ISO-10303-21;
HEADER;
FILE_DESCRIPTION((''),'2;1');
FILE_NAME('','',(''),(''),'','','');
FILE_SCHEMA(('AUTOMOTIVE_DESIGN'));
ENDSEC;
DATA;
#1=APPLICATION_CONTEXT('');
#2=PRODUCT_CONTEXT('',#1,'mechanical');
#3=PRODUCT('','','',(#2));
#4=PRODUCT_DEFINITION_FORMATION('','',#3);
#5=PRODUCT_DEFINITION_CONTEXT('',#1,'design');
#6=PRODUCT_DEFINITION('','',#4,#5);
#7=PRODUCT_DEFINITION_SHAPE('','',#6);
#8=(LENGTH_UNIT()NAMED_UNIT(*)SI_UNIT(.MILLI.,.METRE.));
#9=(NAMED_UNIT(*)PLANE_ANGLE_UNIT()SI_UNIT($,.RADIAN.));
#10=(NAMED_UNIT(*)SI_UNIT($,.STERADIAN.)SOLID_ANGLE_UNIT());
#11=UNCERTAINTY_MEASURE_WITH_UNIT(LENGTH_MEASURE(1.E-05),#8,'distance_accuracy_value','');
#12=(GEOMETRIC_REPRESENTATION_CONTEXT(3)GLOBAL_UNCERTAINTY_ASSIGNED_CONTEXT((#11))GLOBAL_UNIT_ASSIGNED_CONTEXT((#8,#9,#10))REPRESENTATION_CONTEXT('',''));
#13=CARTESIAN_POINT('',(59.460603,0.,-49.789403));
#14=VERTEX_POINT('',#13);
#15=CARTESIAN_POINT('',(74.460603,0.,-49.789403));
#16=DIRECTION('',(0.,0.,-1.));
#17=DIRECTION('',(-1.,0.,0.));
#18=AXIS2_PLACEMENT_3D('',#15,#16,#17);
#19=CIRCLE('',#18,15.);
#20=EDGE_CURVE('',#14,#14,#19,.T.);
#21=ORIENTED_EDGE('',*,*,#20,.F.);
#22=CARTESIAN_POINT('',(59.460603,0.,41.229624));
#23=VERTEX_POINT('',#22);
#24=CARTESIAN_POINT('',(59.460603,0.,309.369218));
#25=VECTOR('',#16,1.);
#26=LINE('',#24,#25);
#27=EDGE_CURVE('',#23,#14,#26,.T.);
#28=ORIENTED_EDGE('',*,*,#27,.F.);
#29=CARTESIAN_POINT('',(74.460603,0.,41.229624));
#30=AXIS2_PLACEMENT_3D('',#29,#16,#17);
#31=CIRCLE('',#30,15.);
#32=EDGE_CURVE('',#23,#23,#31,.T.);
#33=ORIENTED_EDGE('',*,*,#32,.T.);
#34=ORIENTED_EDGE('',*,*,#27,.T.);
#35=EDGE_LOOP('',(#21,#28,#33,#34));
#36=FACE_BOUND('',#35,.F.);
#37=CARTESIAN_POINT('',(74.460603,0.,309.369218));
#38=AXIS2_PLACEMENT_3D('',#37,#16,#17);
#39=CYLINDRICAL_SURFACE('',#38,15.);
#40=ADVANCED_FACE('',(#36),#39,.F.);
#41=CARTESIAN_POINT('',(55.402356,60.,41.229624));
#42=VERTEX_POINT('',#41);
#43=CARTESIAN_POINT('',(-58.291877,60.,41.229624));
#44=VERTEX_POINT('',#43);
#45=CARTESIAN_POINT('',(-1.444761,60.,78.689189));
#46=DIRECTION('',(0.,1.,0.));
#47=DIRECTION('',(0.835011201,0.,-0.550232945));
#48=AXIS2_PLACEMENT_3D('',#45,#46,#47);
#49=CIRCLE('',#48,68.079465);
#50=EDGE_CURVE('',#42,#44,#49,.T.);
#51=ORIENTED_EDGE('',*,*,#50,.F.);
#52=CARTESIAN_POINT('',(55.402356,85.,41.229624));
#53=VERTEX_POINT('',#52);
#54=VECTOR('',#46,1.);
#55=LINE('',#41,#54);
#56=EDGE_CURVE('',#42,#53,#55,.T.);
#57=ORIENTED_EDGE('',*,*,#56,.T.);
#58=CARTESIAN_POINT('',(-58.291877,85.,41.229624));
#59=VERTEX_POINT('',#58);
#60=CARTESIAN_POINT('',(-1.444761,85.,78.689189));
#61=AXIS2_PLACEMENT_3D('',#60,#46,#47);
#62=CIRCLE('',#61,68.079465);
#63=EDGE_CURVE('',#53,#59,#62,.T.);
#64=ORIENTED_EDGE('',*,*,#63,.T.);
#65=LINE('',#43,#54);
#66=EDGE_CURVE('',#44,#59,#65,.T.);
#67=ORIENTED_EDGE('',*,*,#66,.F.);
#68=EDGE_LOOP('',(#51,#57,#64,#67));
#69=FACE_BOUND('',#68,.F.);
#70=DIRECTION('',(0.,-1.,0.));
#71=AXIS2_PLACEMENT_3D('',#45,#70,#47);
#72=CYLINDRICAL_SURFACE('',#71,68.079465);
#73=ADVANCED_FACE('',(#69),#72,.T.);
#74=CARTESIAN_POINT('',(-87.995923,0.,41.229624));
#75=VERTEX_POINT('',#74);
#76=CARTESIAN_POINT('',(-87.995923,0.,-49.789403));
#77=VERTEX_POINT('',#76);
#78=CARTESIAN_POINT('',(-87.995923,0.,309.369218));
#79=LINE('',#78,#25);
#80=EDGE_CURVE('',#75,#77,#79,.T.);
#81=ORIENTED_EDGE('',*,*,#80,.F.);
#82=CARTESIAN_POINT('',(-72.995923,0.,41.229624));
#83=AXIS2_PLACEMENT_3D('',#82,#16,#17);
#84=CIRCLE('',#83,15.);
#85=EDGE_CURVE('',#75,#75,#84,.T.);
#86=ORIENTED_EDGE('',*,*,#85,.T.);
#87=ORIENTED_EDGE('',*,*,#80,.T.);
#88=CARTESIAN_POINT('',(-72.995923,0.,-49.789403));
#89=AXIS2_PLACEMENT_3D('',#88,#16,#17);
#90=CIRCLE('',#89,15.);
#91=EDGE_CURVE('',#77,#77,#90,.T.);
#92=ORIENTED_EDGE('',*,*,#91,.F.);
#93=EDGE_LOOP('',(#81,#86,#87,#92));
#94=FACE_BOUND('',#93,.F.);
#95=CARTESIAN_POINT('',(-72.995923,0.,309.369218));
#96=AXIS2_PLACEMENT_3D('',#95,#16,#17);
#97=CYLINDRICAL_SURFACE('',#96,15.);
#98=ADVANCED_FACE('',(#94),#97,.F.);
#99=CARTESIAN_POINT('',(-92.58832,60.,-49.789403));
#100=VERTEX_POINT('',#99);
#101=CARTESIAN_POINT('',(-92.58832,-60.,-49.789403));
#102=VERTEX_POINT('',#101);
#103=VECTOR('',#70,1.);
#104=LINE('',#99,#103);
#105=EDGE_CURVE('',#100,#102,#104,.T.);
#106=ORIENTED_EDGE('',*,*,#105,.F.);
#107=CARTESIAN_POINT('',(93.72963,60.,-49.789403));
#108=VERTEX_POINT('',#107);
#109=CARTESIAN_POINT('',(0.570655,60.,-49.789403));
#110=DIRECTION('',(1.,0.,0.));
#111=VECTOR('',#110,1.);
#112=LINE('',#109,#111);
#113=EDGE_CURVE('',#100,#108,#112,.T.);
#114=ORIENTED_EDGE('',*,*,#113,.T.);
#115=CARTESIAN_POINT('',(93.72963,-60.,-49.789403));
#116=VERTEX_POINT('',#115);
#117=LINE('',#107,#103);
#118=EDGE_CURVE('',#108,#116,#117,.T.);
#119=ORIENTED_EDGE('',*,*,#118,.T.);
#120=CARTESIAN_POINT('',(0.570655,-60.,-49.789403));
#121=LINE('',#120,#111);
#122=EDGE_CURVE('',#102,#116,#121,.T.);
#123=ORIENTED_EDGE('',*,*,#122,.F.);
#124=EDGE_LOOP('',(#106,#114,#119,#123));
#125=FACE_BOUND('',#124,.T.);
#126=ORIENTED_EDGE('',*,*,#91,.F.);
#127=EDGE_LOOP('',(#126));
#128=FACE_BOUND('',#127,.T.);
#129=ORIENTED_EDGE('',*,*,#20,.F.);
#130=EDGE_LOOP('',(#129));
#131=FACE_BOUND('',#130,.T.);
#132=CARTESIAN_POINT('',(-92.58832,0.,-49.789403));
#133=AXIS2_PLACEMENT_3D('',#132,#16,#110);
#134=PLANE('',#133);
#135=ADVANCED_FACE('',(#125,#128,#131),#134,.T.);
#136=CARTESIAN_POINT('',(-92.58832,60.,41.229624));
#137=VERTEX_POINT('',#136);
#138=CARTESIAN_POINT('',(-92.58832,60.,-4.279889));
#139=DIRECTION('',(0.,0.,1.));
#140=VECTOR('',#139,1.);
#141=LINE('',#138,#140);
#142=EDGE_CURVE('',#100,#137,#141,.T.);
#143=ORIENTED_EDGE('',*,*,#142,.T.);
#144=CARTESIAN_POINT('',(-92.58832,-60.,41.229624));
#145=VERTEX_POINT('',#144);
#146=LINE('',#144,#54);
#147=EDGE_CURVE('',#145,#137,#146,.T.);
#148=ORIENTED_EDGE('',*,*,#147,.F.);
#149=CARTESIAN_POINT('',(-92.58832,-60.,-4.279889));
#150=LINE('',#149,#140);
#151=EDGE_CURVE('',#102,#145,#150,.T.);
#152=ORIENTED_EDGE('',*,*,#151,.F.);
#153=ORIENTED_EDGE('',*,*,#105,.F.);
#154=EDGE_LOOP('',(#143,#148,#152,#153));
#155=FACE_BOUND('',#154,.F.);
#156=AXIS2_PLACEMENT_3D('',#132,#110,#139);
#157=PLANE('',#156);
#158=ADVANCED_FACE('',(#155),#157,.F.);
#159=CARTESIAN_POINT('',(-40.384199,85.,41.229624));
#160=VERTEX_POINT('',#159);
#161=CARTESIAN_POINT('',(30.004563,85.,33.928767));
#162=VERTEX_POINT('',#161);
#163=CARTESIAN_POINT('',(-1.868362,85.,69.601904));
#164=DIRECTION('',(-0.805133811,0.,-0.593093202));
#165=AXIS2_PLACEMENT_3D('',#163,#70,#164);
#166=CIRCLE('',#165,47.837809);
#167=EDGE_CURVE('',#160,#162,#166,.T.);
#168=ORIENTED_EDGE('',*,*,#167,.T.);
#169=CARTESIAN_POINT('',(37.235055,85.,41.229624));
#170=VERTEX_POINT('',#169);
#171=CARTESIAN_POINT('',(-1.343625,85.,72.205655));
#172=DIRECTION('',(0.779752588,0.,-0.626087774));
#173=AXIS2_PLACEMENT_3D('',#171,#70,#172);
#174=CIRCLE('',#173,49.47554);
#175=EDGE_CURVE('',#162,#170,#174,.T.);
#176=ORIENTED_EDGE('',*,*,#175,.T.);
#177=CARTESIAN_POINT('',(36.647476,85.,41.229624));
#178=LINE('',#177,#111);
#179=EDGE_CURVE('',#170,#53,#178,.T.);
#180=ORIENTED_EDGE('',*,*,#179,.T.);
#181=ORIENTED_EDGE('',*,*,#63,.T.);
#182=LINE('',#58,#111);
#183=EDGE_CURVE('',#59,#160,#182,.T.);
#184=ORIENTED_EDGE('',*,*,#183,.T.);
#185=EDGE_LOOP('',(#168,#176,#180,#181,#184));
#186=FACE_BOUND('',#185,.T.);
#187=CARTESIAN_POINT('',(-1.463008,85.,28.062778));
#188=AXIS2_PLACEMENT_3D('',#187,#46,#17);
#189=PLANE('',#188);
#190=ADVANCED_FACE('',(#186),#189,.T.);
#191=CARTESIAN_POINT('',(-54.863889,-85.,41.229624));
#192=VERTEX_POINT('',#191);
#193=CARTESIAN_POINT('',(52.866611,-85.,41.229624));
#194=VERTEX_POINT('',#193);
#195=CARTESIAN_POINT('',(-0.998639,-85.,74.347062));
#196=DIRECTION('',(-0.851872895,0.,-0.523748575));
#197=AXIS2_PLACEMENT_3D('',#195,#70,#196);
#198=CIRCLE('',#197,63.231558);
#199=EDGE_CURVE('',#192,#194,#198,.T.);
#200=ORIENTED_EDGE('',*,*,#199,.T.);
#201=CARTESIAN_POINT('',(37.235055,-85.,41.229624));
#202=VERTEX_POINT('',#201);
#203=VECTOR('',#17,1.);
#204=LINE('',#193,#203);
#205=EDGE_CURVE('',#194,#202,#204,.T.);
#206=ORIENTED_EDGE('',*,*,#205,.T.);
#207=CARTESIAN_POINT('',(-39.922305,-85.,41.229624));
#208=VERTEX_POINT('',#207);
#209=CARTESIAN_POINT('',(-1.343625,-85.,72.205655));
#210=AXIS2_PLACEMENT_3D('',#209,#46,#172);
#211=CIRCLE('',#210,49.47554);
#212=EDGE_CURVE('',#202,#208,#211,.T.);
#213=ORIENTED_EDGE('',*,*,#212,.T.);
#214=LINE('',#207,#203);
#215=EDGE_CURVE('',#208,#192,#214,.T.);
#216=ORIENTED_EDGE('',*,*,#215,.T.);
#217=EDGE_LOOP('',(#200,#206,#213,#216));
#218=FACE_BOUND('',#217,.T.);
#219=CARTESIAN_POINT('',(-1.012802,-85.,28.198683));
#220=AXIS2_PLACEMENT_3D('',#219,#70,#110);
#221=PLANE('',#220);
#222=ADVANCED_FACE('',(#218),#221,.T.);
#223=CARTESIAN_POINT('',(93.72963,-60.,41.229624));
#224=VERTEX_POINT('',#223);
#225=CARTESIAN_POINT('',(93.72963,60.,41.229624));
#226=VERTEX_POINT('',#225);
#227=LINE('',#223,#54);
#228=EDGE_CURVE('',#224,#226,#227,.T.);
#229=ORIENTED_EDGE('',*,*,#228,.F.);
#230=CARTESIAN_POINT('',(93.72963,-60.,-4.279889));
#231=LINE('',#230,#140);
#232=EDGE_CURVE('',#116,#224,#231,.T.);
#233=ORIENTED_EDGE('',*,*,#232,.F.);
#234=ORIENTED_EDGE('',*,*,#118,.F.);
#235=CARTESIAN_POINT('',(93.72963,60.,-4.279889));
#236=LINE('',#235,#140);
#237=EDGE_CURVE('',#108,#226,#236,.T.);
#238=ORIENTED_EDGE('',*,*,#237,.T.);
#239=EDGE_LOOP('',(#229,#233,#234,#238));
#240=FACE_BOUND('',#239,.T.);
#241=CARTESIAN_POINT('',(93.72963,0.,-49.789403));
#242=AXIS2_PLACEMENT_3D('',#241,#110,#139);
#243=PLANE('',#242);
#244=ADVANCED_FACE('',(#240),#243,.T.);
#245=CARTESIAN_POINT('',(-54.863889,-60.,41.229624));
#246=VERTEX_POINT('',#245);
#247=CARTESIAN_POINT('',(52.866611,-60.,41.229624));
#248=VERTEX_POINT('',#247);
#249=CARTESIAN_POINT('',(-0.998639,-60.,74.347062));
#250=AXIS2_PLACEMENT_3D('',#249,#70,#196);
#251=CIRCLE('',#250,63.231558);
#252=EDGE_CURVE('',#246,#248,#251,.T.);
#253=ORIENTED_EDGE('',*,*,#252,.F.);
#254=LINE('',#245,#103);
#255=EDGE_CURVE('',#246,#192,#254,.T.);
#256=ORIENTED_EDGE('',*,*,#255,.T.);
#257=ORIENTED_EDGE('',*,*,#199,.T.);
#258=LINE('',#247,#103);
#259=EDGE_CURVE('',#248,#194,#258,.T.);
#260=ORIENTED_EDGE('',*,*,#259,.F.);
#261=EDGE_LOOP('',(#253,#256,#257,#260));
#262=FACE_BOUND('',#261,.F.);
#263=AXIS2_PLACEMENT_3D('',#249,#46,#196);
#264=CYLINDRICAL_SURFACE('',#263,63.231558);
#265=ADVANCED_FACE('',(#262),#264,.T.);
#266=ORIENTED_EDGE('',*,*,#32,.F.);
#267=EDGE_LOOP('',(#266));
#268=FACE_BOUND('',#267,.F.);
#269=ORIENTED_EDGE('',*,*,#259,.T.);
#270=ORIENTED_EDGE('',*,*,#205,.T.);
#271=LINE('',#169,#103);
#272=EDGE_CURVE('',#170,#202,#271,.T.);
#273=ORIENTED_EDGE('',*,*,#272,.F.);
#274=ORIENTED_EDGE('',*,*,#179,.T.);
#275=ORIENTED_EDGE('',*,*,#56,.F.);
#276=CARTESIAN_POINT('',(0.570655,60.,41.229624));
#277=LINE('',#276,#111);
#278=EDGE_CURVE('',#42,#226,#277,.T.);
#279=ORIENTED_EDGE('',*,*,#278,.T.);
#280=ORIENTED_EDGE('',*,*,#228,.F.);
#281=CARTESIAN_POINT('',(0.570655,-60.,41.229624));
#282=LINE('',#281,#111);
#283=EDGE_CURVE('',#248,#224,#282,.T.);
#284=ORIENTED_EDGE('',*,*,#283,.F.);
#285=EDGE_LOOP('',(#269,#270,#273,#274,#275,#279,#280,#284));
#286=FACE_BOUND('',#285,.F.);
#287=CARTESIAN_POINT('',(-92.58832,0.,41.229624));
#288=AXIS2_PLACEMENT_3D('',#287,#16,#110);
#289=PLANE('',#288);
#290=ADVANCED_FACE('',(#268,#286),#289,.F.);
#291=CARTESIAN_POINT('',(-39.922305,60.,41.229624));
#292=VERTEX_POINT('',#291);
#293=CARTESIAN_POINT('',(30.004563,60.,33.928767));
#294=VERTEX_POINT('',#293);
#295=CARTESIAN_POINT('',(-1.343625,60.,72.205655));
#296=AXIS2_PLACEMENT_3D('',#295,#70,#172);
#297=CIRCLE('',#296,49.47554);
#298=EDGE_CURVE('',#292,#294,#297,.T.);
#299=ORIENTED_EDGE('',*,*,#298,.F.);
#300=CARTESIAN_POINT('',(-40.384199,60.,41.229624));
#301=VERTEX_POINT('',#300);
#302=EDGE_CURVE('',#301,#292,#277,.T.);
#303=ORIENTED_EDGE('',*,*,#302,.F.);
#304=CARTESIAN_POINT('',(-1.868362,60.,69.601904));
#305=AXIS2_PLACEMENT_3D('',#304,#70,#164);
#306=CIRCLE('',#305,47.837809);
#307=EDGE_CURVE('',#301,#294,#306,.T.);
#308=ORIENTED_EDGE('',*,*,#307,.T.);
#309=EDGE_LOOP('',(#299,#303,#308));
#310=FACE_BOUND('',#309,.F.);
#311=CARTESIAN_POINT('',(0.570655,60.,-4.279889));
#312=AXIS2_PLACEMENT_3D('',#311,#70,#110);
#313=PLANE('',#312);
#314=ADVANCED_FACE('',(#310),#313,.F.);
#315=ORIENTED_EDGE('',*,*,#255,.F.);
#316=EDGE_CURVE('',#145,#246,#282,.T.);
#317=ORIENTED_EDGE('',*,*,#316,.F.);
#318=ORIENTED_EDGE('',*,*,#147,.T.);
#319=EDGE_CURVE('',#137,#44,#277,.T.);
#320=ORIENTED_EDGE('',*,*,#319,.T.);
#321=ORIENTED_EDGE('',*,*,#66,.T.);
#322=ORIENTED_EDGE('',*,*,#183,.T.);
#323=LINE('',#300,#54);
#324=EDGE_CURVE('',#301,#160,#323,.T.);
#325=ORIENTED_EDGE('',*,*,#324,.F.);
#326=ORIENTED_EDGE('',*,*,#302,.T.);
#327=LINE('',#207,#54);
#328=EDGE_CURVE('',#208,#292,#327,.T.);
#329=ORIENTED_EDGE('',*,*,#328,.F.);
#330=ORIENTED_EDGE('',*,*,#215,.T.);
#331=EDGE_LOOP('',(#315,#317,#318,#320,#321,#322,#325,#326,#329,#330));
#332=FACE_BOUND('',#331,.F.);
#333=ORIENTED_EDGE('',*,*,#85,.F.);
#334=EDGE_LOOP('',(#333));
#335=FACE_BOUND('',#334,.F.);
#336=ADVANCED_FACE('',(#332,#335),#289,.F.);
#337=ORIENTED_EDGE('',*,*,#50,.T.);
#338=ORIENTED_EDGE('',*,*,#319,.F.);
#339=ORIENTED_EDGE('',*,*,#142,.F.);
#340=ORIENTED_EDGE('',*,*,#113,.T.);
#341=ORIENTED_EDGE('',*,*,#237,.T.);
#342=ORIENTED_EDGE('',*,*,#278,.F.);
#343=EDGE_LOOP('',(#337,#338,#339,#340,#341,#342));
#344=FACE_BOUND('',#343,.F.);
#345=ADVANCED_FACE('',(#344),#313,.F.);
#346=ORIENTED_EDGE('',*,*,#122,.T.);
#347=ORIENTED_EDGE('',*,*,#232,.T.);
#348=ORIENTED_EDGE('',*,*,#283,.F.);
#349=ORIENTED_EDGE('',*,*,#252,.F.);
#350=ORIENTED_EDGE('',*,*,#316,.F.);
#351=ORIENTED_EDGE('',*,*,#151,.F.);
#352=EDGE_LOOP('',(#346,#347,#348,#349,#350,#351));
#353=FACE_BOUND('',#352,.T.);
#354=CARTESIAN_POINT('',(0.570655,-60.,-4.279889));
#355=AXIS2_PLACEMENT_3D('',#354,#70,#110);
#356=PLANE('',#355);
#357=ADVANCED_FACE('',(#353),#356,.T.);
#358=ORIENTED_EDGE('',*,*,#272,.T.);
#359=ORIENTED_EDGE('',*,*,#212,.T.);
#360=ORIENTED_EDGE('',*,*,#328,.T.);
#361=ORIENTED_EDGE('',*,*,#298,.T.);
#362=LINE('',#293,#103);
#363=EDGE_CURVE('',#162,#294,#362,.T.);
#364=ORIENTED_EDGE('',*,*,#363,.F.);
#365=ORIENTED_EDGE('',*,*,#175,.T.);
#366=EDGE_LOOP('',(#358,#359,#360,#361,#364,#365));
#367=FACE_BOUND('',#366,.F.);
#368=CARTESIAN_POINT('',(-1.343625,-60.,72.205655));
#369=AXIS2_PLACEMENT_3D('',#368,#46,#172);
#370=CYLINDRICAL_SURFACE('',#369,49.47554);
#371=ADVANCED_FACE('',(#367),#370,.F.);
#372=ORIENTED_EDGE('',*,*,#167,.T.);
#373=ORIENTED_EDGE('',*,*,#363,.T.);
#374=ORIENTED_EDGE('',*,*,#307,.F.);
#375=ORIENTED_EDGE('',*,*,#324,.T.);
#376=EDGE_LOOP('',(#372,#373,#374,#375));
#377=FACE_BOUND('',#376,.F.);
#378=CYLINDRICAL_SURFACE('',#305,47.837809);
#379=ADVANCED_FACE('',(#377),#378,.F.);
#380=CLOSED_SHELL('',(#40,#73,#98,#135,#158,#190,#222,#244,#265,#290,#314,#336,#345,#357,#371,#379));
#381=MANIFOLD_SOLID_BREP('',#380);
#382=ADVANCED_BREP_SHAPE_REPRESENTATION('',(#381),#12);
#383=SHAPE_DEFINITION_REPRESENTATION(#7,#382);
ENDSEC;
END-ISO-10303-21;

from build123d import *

# Parameters (mm, degrees)
F0_W        = 186.3179504871
F0_H        = 91.0190269351
F1_DEPTH    = 60
F3_DEPTH    = 25
F5_DEPTH    = 25
F7_DEPTH    = 181
F10_D       = 30
F10_ON_F9_D = 30


with BuildPart() as f1:
    # F0 (on Front) → F1 (new body, symmetric)
    with BuildSketch(Plane.XZ):
        with Locations((0.5706548691, -4.2798891664)):
            Rectangle(F0_W, F0_H)
    extrude(amount=F1_DEPTH, both=True)

    # F2 (on face) → F3 (join)
    with BuildSketch(Plane.XZ.offset(60)):
        with BuildLine():
            ThreePointArc((37.2350551188, 41.2296243012), (-1.3436250294, 22.7301151194), (-39.9223051776, 41.2296243012))
            Line((-39.9223051776, 41.2296243012), (-54.8638885904, 41.2296243012))
            ThreePointArc((-54.8638885904, 41.2296243012), (-0.9986385703, 11.1155049194), (52.8666114498, 41.2296243012))
            Line((52.8666114498, 41.2296243012), (37.2350551188, 41.2296243012))
        make_face()
    extrude(amount=F3_DEPTH)

    # F4 (on face) → F5 (join)
    with BuildSketch(Plane(origin=(0, 60, 0), x_dir=(-1, 0, 0), z_dir=(0, 1, 0))):
        with BuildLine():
            Line((-36.6474762559, 41.2296243012), (-55.402355561, 41.2296243012))
            ThreePointArc((-55.402355561, 41.2296243012), (1.44476071, 10.6097235864), (58.291876981, 41.2296243012))
            Line((58.291876981, 41.2296243012), (40.3841994703, 41.2296243012))
            ThreePointArc((40.3841994703, 41.2296243012), (1.8683616072, 21.7640944123), (-36.6474762559, 41.2296243012))
        make_face()
    extrude(amount=F5_DEPTH)

    # F7 (cut): a face of the model
    f7_faces = [f1.faces().sort_by_distance(p)[0] for p in [
        (-1.3436250294, -60, 33.6967312772),
    ]]
    extrude(f7_faces, amount=-F7_DEPTH, mode=Mode.SUBTRACT)

    # F10 (through all)
    with Locations(Plane.XY.offset(41.2296243012)):
        with Locations((-72.9959234595, 0)):
            Hole(F10_D / 2)

    # F10 on F9 (through all)
    with Locations(Plane.XY.offset(41.2296243012)):
        with Locations((74.4606032968, 0)):
            Hole(F10_ON_F9_D / 2)


solid = f1.part
